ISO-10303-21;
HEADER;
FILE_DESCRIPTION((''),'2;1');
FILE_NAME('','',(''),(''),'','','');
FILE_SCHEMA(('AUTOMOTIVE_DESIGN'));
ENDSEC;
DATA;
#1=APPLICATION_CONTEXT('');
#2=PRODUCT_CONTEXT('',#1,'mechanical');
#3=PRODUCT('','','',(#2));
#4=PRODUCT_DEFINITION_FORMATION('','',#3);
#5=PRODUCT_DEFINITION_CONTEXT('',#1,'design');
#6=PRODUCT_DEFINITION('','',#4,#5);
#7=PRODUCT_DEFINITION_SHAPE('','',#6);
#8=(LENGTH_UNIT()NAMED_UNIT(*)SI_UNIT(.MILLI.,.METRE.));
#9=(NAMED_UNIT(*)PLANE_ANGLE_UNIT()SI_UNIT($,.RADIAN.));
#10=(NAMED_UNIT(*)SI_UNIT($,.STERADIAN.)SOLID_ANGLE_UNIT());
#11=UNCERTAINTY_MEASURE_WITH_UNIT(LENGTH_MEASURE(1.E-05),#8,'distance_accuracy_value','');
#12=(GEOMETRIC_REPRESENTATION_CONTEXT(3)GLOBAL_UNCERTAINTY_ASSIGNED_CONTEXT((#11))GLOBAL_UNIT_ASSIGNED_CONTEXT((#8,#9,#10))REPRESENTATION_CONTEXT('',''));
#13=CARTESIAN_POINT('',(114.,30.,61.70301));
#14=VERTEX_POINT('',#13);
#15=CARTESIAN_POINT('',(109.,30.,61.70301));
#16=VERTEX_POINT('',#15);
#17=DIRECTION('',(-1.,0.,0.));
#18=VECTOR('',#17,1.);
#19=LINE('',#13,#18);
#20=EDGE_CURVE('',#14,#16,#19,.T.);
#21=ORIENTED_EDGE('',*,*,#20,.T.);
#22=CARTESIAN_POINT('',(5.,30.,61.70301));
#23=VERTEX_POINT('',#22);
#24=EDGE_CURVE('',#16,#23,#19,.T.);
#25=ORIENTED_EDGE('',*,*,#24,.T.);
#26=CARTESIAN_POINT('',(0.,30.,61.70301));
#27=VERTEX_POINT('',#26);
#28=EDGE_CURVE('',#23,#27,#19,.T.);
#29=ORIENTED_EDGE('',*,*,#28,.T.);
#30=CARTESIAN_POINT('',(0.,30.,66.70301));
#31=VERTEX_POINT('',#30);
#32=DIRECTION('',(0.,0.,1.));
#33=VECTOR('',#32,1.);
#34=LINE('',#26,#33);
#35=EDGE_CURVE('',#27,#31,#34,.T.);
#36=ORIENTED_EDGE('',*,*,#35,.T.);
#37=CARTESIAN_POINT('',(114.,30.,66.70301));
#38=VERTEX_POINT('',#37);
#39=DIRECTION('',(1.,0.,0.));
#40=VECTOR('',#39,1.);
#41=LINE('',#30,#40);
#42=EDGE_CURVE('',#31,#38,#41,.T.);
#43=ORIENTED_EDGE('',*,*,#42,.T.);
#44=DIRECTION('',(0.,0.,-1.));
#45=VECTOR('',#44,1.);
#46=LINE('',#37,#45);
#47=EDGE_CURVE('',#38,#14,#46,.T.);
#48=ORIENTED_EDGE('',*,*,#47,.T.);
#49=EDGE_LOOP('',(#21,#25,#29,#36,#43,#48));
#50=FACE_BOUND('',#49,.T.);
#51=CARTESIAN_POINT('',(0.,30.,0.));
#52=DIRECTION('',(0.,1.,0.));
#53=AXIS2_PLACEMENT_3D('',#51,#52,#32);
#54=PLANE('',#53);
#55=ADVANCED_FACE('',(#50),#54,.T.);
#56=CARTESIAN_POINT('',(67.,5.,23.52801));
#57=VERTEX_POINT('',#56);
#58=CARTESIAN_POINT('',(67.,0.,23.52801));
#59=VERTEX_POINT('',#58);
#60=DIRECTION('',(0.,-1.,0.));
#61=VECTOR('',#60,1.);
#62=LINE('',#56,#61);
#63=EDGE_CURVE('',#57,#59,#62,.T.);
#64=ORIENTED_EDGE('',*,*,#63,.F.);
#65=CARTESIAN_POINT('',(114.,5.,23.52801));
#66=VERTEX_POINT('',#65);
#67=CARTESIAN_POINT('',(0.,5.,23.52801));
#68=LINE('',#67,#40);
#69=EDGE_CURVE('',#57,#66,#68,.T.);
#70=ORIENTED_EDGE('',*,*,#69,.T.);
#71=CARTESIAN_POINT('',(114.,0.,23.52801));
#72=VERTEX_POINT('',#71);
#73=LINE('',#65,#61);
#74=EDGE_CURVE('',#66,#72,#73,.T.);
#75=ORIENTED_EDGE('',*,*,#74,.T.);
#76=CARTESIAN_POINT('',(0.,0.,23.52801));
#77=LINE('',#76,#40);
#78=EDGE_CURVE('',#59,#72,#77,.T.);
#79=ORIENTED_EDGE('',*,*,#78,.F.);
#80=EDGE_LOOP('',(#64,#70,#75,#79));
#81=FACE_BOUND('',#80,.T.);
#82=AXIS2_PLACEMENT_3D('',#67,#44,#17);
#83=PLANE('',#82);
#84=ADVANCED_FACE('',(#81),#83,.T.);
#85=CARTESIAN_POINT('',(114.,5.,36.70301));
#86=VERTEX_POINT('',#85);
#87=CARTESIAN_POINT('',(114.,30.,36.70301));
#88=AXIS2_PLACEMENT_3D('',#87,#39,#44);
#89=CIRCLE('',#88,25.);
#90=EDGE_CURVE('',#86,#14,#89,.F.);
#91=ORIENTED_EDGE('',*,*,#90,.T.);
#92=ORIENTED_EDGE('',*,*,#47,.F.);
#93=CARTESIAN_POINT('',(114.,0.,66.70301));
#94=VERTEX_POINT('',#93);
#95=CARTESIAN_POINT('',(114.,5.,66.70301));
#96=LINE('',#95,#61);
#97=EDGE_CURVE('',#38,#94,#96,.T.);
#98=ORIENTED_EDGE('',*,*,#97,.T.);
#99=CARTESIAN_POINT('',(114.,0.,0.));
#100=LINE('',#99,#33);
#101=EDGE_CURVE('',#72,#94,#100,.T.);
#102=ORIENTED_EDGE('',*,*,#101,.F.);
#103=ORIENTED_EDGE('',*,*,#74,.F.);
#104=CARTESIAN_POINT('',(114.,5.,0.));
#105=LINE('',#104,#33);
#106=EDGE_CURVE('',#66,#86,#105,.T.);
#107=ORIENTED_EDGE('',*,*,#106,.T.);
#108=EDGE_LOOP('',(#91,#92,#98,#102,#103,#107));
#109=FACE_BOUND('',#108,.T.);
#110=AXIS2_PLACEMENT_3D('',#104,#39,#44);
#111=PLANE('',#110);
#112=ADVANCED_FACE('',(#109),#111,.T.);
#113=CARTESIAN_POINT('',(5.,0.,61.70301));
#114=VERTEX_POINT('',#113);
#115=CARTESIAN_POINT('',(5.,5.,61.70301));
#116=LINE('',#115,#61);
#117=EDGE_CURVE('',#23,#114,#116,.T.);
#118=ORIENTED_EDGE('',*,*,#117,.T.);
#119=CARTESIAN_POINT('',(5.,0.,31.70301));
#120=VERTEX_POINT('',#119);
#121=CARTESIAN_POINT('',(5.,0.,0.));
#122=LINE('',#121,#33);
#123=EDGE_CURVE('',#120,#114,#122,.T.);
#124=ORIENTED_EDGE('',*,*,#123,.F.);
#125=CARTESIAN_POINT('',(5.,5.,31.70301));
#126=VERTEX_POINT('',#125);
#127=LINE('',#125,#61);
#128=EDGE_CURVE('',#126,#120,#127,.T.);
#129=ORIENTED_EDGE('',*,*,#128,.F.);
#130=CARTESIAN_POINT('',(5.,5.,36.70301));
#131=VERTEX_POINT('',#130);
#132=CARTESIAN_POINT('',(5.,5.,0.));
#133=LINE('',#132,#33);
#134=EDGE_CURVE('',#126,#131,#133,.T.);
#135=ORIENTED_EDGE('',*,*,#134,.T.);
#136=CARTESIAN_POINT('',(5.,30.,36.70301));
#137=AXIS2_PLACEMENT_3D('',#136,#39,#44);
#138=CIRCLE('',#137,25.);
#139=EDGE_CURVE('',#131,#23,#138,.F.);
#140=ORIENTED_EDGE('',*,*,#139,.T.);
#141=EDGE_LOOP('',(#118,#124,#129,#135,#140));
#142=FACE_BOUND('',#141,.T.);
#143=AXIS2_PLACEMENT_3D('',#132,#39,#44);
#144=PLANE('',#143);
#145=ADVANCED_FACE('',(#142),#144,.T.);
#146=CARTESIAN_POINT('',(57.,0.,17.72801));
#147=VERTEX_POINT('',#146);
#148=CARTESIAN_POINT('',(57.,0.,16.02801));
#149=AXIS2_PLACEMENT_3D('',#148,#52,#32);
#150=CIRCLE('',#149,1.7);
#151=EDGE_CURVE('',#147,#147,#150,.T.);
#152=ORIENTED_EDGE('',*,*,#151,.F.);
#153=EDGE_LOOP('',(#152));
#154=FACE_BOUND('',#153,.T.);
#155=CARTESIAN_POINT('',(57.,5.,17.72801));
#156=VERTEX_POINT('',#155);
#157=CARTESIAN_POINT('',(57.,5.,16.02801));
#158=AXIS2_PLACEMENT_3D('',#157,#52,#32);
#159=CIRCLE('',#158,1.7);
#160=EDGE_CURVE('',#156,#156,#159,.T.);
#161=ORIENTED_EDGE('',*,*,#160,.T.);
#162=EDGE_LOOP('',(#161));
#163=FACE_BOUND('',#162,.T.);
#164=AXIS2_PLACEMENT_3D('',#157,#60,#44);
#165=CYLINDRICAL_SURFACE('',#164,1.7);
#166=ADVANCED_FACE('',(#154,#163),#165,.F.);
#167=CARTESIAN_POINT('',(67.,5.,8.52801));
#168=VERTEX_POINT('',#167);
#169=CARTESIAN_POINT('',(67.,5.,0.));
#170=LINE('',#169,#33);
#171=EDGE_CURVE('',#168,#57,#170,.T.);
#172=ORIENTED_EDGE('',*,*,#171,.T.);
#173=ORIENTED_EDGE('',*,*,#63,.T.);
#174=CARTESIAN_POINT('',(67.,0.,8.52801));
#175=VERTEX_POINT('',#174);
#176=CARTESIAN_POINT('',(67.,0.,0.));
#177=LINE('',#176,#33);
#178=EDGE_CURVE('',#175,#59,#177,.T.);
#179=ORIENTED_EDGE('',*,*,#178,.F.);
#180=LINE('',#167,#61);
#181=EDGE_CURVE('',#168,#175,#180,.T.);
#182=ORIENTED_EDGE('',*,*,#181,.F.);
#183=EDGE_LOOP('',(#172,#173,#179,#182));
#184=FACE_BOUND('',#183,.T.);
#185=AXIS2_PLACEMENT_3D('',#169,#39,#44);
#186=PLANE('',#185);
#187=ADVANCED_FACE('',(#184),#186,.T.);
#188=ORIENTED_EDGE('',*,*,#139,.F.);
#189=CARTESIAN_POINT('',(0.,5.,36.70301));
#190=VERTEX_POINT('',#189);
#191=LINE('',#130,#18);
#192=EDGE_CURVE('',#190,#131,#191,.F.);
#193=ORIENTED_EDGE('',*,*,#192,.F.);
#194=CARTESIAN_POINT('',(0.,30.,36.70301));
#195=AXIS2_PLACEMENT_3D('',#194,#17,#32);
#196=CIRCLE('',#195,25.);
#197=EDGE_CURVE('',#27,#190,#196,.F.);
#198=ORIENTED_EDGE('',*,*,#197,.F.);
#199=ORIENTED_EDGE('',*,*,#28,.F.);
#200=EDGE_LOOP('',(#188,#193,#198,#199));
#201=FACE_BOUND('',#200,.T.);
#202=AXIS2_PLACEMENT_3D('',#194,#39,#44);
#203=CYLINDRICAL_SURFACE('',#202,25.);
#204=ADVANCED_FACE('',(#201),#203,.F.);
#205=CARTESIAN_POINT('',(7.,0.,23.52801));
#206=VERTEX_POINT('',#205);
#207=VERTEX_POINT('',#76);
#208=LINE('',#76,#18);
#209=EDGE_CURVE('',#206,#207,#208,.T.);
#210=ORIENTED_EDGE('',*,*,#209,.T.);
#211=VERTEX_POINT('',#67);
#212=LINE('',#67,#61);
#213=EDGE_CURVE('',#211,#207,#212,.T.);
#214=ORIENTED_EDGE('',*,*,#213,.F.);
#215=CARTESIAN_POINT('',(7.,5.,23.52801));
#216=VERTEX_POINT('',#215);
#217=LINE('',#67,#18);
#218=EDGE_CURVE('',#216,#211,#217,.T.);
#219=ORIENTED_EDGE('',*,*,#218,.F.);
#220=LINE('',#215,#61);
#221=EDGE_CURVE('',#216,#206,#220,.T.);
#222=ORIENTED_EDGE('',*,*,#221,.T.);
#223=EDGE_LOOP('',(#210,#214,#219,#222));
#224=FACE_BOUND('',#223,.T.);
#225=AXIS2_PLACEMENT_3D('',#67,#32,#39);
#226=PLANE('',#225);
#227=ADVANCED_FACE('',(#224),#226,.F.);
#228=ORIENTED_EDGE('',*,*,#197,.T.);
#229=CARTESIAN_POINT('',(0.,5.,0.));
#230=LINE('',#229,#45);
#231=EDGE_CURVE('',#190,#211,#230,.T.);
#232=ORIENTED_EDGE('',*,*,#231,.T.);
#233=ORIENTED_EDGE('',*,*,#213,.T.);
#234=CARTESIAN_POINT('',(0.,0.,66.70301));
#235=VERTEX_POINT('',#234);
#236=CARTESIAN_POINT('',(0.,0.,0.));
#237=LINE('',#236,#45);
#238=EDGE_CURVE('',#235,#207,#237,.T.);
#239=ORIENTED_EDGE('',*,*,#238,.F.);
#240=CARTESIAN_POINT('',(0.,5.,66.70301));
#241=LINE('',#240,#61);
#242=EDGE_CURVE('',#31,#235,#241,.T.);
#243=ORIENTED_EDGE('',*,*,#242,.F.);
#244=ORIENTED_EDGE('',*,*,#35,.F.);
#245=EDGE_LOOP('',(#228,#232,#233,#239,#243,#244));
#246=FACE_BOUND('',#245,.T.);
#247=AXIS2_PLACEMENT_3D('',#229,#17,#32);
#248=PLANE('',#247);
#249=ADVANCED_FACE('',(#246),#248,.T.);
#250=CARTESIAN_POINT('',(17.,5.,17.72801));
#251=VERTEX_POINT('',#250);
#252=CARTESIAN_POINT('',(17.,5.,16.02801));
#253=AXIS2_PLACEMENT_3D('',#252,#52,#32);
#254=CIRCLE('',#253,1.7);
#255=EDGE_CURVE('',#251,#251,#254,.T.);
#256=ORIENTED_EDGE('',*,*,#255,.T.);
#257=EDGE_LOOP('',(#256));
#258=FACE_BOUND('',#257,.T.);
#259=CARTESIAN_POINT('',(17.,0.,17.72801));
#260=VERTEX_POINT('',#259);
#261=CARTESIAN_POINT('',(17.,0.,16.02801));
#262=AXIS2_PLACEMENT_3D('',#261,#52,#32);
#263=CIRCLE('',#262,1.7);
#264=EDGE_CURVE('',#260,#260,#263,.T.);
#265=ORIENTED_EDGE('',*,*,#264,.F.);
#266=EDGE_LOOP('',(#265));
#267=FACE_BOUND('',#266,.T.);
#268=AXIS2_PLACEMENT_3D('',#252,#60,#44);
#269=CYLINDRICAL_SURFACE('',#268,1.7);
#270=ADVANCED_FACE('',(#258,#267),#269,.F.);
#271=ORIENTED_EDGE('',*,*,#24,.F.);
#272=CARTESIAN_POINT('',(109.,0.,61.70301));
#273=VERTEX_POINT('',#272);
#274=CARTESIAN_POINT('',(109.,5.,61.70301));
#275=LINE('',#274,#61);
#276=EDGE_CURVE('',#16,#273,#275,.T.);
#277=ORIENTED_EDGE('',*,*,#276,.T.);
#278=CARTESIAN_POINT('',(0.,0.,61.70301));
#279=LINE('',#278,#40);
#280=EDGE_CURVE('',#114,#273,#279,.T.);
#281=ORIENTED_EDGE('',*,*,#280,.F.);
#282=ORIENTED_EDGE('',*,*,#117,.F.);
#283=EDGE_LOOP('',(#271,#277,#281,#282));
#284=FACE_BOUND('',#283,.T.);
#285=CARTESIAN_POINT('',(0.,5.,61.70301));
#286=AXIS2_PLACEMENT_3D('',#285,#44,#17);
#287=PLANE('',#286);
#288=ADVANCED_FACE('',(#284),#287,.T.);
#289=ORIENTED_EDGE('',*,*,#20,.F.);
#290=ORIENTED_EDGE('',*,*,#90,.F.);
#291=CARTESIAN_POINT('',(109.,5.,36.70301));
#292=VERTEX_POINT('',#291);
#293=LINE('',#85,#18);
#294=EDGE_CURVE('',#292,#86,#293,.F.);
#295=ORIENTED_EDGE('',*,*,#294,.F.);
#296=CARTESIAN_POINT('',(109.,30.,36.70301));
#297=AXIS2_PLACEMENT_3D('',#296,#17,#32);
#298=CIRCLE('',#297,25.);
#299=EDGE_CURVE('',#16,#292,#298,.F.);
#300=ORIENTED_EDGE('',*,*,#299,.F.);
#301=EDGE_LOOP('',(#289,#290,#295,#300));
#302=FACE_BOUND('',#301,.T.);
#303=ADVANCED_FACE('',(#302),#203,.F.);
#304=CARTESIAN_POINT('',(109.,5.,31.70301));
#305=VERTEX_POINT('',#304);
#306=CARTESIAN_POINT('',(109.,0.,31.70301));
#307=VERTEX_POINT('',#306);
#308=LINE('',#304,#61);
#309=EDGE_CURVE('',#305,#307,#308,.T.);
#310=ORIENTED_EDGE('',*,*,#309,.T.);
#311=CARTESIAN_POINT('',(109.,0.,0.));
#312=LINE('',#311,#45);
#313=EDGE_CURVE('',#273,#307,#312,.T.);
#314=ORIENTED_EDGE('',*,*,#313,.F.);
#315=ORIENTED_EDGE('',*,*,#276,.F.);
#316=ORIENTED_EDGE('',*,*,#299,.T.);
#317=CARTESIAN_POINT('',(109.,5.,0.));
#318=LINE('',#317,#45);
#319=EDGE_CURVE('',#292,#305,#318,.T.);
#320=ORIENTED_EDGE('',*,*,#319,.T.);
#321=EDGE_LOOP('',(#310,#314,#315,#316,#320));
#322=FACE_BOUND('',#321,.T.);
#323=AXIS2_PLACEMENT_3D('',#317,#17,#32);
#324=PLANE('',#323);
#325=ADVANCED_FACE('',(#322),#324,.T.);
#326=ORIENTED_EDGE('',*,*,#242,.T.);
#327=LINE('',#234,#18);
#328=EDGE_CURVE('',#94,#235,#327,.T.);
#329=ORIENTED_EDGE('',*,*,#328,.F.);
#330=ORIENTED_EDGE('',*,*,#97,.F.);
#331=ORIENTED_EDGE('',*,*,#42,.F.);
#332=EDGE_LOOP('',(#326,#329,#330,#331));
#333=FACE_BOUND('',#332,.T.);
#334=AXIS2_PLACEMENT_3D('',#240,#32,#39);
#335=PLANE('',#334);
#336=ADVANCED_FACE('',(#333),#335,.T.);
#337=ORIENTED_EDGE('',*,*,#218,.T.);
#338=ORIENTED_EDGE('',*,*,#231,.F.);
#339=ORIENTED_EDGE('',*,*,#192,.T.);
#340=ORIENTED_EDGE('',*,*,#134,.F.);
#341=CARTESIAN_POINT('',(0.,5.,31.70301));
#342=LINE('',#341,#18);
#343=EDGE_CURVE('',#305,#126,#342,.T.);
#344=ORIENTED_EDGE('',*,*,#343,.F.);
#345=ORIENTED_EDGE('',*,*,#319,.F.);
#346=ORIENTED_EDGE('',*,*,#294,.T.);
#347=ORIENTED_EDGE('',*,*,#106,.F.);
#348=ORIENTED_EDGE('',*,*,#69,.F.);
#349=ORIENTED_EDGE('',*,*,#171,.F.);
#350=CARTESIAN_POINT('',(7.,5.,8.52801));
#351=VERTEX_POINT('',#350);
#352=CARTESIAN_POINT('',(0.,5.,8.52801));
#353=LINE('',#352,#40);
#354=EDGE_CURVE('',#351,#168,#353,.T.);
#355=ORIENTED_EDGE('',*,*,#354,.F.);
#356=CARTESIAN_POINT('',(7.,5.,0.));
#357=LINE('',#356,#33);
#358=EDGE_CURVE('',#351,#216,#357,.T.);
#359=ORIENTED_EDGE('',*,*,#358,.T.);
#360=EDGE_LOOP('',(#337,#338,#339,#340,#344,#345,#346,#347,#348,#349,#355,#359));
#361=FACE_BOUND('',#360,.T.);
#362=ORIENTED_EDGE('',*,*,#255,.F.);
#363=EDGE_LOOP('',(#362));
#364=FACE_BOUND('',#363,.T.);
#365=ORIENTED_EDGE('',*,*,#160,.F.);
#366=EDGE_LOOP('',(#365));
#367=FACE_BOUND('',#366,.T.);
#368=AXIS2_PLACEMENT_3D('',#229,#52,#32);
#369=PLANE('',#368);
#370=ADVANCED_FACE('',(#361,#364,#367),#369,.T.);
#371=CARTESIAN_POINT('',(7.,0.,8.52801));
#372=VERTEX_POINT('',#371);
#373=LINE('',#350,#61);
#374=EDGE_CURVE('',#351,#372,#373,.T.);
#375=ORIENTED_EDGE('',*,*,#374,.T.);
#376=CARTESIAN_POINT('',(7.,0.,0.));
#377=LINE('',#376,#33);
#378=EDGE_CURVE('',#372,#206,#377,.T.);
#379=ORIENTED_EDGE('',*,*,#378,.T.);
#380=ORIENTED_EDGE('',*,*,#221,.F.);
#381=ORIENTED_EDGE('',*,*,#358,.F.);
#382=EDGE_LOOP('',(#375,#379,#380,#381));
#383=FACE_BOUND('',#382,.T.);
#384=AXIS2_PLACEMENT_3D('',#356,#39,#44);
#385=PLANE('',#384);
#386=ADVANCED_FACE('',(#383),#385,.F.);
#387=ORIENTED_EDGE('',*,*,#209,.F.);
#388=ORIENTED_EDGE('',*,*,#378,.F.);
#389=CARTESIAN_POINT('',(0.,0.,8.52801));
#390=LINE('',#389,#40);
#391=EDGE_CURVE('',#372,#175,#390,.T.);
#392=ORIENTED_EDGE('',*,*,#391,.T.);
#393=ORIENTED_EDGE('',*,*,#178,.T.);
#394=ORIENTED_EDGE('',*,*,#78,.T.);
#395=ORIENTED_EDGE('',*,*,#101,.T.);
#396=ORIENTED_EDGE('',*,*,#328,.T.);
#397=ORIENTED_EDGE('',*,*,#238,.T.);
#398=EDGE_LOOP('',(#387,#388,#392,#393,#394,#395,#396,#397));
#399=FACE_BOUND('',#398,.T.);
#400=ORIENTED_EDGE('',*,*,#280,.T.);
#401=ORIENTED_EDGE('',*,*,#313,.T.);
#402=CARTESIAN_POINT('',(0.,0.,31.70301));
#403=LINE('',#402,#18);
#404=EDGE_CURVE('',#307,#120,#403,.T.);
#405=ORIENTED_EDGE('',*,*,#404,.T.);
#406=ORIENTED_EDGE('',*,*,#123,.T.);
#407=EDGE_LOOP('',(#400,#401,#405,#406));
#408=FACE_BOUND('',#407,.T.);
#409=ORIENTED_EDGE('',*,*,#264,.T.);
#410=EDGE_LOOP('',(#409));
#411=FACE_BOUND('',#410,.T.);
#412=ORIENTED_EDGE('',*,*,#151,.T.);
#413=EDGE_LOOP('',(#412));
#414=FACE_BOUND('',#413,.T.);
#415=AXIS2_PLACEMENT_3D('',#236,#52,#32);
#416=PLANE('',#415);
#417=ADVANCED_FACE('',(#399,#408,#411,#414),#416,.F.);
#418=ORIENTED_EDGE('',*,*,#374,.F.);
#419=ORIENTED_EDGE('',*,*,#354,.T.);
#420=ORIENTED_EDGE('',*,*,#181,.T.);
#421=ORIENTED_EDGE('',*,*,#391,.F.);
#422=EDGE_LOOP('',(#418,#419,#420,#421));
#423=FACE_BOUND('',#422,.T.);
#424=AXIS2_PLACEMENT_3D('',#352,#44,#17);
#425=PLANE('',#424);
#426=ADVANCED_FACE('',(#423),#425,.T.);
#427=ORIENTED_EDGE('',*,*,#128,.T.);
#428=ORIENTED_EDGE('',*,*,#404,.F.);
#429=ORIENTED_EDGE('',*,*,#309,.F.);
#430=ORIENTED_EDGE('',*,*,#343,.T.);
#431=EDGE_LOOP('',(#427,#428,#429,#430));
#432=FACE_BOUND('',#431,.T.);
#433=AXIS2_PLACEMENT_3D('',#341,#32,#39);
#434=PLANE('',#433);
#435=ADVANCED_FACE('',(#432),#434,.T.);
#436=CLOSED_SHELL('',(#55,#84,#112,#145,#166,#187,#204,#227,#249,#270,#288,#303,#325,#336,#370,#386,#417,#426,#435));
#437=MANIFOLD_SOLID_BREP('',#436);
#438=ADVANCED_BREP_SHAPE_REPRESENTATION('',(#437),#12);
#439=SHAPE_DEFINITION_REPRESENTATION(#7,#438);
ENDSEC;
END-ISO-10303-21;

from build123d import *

# Parameters (mm, degrees)
SKETCH1_W           = 104
SKETCH1_H           = 30
SKETCH1_R           = 1.7
BOSS_EXTRUDE1_DEPTH = 5
BOSS_EXTRUDE2_DEPTH = 25
FILLET1_R           = 25


with BuildPart() as part:
    # Sketch1 → Boss-Extrude1 (new body)
    with BuildSketch(Plane(origin=(0, 0, 0), x_dir=(1, 0, 0), z_dir=(0, 1, 0))):
        Polygon((67, -8.528010066), (7, -8.528010066), (7, -23.528010066), (0, -23.528010066), (0, -66.703010066), (114, -66.703010066), (114, -23.528010066), (67, -23.528010066), align=None)
        with Locations((57, -46.703010066)):
            Rectangle(SKETCH1_W, SKETCH1_H, mode=Mode.SUBTRACT)
        with Locations(Location((17, -16.028010066, 0), (0, 0, 270))):
            Circle(SKETCH1_R, mode=Mode.SUBTRACT)
        with Locations(Location((57, -16.028010066, 0), (0, 0, 270))):
            Circle(SKETCH1_R, mode=Mode.SUBTRACT)
    extrude(amount=BOSS_EXTRUDE1_DEPTH)

    # Sketch2 → Boss-Extrude2 (add)
    with BuildSketch(Plane(origin=(0, 5, 0), x_dir=(1, 0, 0), z_dir=(0, 1, 0))):
        Polygon((5, -61.703010066), (0, -61.703010066), (0, -66.703010066), (114, -66.703010066), (114, -61.703010066), align=None)
    extrude(amount=BOSS_EXTRUDE2_DEPTH)

    # Fillet1
    fillet1_edges = [part.edges().sort_by_distance(p)[0] for p in [
        (2.5, 5, 61.703010066),
        (111.5, 5, 61.703010066),
    ]]
    fillet(fillet1_edges, radius=FILLET1_R - 0.0001)  # a hair under: the kernel refuses the full size


solid = part.part
